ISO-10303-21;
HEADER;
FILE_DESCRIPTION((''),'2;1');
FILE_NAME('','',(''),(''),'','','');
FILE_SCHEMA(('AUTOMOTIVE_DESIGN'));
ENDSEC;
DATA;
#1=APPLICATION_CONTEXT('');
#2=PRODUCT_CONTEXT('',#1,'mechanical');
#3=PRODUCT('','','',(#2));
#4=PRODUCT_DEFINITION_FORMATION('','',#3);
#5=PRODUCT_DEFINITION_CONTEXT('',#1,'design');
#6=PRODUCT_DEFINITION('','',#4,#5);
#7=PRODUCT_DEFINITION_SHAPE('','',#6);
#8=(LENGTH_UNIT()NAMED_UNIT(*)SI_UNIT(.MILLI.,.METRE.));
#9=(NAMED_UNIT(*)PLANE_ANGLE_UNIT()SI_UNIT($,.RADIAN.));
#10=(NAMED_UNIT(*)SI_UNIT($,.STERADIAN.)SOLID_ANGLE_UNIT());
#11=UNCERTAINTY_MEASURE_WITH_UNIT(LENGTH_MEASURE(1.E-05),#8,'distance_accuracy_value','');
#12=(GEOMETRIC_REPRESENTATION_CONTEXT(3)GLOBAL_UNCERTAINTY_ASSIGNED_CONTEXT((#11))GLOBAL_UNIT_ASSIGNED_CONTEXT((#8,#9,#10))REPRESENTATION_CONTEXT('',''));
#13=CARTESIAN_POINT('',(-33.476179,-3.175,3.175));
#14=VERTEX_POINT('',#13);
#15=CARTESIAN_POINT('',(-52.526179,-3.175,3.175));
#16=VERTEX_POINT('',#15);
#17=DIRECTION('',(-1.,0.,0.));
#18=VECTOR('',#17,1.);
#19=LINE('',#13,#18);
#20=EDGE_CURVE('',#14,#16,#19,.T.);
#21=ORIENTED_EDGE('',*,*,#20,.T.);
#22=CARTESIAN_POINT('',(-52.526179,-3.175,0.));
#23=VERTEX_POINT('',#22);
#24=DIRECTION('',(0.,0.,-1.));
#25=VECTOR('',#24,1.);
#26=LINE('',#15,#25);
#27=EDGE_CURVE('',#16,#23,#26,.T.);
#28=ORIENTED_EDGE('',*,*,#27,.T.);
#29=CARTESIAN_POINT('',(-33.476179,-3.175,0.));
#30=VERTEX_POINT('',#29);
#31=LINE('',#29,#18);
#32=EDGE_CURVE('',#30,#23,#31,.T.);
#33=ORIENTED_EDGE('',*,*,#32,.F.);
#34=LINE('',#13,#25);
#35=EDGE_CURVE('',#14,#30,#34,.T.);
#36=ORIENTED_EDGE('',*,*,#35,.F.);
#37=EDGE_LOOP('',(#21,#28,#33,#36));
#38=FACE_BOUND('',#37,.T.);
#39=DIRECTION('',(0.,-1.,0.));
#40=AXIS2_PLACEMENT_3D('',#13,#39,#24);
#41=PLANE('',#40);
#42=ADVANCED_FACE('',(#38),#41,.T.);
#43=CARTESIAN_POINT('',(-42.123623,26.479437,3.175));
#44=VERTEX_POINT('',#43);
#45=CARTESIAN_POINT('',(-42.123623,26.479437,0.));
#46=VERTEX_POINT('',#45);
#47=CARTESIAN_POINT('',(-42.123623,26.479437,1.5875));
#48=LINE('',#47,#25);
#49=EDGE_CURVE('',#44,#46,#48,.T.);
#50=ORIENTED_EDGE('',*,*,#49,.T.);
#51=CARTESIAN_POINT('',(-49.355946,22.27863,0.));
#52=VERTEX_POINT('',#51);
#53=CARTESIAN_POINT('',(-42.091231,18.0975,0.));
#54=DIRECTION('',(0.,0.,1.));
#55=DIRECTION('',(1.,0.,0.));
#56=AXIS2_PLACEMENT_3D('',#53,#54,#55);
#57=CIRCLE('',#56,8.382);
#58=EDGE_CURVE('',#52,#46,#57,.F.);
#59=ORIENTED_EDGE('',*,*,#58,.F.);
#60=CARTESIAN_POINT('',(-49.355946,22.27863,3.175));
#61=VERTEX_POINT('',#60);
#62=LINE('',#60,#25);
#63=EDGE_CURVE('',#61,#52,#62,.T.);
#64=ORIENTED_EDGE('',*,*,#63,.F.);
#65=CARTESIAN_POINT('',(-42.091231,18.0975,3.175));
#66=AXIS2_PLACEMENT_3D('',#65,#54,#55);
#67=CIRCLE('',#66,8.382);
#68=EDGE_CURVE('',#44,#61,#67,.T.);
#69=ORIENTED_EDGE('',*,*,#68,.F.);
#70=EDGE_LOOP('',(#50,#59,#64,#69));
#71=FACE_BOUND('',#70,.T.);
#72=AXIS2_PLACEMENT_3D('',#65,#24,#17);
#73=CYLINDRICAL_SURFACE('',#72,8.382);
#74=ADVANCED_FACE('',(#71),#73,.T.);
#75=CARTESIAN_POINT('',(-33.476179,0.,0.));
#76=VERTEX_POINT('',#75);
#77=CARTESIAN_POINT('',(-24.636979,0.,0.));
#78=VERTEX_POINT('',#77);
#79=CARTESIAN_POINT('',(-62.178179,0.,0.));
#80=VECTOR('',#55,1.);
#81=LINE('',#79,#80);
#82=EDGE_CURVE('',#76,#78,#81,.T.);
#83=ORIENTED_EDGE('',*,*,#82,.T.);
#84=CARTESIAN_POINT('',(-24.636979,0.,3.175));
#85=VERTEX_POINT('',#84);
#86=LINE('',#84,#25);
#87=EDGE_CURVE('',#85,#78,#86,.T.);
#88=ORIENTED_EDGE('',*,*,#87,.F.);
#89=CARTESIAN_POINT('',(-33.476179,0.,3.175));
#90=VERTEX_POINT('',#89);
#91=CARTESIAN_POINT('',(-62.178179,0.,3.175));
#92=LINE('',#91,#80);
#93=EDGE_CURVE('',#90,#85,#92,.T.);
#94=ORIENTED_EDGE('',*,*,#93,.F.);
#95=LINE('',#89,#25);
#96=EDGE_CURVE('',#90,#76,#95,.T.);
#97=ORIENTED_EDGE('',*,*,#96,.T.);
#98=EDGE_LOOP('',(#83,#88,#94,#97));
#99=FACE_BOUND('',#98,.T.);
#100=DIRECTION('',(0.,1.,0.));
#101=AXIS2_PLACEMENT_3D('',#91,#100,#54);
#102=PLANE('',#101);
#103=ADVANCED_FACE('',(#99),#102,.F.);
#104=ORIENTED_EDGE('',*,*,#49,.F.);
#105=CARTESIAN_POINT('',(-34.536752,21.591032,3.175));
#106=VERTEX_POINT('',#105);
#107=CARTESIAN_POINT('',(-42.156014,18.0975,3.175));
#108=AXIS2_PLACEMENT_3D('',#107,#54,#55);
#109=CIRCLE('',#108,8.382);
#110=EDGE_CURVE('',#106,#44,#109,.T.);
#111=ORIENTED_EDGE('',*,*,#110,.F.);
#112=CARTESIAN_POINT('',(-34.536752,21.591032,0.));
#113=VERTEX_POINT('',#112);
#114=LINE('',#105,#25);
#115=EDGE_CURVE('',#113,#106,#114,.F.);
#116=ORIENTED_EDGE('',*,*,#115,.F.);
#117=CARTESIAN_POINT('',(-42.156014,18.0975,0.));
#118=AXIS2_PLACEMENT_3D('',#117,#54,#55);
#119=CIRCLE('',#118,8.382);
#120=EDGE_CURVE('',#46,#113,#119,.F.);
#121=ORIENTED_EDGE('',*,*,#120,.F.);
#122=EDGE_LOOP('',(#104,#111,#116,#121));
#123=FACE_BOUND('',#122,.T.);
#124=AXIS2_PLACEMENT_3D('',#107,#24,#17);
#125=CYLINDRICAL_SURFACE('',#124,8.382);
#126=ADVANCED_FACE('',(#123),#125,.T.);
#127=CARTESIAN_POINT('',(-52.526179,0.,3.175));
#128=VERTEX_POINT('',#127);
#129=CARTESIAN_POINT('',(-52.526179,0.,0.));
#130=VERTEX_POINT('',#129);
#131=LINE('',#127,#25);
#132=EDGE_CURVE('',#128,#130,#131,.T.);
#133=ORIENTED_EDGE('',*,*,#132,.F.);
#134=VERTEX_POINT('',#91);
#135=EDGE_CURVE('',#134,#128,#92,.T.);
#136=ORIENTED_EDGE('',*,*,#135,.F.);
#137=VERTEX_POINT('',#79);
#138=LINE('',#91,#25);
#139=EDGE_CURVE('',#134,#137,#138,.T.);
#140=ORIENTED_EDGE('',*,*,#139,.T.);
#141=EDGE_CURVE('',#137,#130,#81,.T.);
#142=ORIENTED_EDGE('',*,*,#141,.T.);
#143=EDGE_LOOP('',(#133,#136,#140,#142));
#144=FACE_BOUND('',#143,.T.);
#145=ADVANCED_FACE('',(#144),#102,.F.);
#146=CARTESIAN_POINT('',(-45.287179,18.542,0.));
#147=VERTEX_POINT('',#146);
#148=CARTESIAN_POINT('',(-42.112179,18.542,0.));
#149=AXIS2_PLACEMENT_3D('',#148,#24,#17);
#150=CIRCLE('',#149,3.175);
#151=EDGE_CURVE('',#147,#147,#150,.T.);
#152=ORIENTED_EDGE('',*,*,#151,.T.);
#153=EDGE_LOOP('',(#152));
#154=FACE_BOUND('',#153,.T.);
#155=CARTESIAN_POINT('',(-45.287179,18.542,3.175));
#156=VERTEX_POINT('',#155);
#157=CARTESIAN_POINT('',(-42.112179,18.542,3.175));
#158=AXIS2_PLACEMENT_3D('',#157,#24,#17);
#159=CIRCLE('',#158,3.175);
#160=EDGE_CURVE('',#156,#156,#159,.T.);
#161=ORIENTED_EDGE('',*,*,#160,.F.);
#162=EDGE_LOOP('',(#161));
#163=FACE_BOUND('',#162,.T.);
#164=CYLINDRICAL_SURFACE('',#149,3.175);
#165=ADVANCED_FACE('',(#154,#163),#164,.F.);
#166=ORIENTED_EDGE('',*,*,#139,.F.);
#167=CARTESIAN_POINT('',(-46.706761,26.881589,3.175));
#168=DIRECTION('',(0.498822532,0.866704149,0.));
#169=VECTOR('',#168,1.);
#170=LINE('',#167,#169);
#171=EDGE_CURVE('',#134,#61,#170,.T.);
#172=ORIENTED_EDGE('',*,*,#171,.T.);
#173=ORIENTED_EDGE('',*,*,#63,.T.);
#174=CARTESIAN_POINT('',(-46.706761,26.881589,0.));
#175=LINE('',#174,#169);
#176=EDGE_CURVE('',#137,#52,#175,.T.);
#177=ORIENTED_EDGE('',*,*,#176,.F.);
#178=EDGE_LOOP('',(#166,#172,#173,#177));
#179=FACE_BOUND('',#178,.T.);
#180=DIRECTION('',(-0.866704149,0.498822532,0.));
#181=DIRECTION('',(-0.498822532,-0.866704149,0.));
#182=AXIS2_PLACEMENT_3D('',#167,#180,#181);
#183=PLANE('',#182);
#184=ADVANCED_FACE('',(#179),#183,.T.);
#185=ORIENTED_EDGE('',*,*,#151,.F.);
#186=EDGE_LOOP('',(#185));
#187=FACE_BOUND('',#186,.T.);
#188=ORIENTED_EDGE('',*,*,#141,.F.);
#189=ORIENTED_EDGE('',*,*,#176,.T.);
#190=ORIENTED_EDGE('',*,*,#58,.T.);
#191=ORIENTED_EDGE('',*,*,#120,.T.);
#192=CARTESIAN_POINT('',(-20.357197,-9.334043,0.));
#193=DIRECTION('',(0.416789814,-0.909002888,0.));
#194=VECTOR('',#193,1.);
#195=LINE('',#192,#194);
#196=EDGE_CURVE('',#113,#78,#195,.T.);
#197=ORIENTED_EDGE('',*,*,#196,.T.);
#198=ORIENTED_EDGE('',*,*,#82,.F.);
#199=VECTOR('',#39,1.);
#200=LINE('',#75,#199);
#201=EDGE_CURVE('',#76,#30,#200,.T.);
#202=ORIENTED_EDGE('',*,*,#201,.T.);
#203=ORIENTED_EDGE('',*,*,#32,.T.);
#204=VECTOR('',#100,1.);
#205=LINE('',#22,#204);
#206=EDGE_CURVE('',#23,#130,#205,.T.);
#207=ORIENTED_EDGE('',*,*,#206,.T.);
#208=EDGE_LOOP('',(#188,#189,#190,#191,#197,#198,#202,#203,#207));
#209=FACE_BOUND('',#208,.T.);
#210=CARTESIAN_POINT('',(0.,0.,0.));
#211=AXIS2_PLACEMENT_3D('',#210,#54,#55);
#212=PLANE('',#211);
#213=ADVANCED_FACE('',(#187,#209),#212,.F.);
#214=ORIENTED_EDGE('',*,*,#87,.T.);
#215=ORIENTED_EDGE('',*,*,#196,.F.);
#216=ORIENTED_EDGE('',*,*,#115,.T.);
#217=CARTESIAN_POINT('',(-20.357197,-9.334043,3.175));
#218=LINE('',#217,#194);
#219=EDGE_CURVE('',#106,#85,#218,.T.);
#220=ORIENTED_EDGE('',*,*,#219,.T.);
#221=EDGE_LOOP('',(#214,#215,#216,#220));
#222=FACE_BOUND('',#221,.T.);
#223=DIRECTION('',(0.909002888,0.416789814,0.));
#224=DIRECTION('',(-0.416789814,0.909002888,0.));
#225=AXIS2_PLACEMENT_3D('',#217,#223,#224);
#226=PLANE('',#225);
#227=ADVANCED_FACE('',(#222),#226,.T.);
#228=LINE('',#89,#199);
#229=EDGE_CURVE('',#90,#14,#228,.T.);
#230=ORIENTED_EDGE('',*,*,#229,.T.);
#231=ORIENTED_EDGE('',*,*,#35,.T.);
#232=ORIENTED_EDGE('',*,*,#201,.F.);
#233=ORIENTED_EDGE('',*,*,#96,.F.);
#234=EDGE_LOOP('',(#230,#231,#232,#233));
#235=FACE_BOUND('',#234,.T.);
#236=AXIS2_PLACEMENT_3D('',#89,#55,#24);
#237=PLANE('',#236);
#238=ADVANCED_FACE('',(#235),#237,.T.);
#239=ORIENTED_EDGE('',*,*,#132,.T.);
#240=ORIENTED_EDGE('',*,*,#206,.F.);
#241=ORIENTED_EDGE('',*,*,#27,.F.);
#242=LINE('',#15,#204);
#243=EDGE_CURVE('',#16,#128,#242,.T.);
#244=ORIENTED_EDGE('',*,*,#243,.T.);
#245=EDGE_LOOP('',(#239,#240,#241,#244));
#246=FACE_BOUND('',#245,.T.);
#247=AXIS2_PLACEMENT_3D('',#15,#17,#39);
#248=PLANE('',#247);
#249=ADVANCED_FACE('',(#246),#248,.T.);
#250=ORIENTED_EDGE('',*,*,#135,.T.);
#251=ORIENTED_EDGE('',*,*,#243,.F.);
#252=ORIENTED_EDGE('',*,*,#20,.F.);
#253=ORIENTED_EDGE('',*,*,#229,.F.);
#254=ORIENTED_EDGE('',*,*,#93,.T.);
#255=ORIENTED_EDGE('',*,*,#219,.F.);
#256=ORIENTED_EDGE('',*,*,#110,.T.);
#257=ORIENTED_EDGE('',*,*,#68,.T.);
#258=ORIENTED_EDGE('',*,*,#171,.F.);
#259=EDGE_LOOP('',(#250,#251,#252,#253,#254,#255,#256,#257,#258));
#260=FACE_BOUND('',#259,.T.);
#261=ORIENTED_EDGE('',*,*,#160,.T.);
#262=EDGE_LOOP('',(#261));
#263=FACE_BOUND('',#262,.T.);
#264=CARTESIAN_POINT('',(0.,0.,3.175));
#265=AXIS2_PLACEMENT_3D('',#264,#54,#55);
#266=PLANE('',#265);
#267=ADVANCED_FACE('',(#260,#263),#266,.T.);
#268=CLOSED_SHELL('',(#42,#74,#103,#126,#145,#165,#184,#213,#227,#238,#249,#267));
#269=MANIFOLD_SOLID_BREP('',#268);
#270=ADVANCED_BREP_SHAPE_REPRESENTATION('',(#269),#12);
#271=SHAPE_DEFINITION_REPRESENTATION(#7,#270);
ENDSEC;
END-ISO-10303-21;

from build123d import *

# Parameters (mm, degrees)
SKETCH1_W                   = 62.178178995
SKETCH1_H                   = 55.159619557
BOSS_EXTRUDE1_DEPTH         = 3.175
F_1_4_0_25_DIAMETER_HOLE1_D = 6.35
CUT_EXTRUDE6_DEPTH          = 84.179265432
FILLET1_R                   = 8.382
SKETCH7_W                   = 19.05
SKETCH7_H                   = 3.175
BOSS_EXTRUDE2_DEPTH         = 3.175


with BuildPart() as part:
    # Sketch1 → Boss-Extrude1 (new body)
    with BuildSketch(Plane.XY):
        with Locations((-31.089089498, 27.579809779)):
            Rectangle(SKETCH1_W, SKETCH1_H)
    extrude(amount=BOSS_EXTRUDE1_DEPTH)

    # 1/4 (0.25) Diameter Hole1 (through all)
    with Locations(Plane(origin=(0, 0, 0), x_dir=(-1, 0, 0), z_dir=(0, 0, -1))):
        with Locations((42.112178995, 18.542)):
            Hole(F_1_4_0_25_DIAMETER_HOLE1_D / 2)

    # Sketch4 → Cut-Extrude6 (cut, through all)
    with BuildSketch(Plane(origin=(0, 0, 0), x_dir=(-1, 0, 0), z_dir=(0, 0, -1))):
        Polygon((46.938178995, 26.4795), (62.178178995, 0), (62.178178995, 55.159619557), (0, 55.159619557), (0, 0), (24.636978995, 0), (36.778178995, 26.4795), align=None)
    extrude(amount=-CUT_EXTRUDE6_DEPTH, mode=Mode.SUBTRACT)

    # Fillet1
    # the kernel refuses this fillet: 8.382 mm, written as the material it takes off along each edge
    with BuildSketch(Plane(origin=(-46.938178995, 26.4795, -12.117368839), x_dir=(-0.49882253176769886, -0.8667041489463767, 0), z_dir=(0, 0, 1))) as fillet1_piece_1:
        with BuildLine():
            CenterArc((FILLET1_R * 0.578256685216, FILLET1_R), FILLET1_R, 209.922129856, 60.077870144)
            Line((-FILLET1_R * 0.288447463731, FILLET1_R * 0.501177468232), (0, 0))
            Line((0, 0), (FILLET1_R * 0.578256685216, 0))
        make_face()
    extrude(amount=27.409737677, mode=Mode.SUBTRACT)
    with BuildSketch(Plane(origin=(-36.778178995, 26.4795, -13.444588142), x_dir=(0.41678981361521655, -0.9090028884808855, 0), z_dir=(0, 0, 1))) as fillet1_piece_2:
        with BuildLine():
            CenterArc((FILLET1_R * 0.641593325803, -FILLET1_R), FILLET1_R, 90, 65.367919757)
            Line((-FILLET1_R * 0.267409562678, -FILLET1_R * 0.583210186385), (0, 0))
            Line((0, 0), (FILLET1_R * 0.641593325803, 0))
        make_face()
    extrude(amount=30.064176284, mode=Mode.SUBTRACT)

    # Sketch7 → Boss-Extrude2 (add)
    with BuildSketch(Plane(origin=(0, 0, 0), x_dir=(-1, 0, 0), z_dir=(0, 0, -1))):
        with Locations((43.001178995, -1.5875)):
            Rectangle(SKETCH7_W, SKETCH7_H)
    extrude(amount=-BOSS_EXTRUDE2_DEPTH)


solid = part.part
